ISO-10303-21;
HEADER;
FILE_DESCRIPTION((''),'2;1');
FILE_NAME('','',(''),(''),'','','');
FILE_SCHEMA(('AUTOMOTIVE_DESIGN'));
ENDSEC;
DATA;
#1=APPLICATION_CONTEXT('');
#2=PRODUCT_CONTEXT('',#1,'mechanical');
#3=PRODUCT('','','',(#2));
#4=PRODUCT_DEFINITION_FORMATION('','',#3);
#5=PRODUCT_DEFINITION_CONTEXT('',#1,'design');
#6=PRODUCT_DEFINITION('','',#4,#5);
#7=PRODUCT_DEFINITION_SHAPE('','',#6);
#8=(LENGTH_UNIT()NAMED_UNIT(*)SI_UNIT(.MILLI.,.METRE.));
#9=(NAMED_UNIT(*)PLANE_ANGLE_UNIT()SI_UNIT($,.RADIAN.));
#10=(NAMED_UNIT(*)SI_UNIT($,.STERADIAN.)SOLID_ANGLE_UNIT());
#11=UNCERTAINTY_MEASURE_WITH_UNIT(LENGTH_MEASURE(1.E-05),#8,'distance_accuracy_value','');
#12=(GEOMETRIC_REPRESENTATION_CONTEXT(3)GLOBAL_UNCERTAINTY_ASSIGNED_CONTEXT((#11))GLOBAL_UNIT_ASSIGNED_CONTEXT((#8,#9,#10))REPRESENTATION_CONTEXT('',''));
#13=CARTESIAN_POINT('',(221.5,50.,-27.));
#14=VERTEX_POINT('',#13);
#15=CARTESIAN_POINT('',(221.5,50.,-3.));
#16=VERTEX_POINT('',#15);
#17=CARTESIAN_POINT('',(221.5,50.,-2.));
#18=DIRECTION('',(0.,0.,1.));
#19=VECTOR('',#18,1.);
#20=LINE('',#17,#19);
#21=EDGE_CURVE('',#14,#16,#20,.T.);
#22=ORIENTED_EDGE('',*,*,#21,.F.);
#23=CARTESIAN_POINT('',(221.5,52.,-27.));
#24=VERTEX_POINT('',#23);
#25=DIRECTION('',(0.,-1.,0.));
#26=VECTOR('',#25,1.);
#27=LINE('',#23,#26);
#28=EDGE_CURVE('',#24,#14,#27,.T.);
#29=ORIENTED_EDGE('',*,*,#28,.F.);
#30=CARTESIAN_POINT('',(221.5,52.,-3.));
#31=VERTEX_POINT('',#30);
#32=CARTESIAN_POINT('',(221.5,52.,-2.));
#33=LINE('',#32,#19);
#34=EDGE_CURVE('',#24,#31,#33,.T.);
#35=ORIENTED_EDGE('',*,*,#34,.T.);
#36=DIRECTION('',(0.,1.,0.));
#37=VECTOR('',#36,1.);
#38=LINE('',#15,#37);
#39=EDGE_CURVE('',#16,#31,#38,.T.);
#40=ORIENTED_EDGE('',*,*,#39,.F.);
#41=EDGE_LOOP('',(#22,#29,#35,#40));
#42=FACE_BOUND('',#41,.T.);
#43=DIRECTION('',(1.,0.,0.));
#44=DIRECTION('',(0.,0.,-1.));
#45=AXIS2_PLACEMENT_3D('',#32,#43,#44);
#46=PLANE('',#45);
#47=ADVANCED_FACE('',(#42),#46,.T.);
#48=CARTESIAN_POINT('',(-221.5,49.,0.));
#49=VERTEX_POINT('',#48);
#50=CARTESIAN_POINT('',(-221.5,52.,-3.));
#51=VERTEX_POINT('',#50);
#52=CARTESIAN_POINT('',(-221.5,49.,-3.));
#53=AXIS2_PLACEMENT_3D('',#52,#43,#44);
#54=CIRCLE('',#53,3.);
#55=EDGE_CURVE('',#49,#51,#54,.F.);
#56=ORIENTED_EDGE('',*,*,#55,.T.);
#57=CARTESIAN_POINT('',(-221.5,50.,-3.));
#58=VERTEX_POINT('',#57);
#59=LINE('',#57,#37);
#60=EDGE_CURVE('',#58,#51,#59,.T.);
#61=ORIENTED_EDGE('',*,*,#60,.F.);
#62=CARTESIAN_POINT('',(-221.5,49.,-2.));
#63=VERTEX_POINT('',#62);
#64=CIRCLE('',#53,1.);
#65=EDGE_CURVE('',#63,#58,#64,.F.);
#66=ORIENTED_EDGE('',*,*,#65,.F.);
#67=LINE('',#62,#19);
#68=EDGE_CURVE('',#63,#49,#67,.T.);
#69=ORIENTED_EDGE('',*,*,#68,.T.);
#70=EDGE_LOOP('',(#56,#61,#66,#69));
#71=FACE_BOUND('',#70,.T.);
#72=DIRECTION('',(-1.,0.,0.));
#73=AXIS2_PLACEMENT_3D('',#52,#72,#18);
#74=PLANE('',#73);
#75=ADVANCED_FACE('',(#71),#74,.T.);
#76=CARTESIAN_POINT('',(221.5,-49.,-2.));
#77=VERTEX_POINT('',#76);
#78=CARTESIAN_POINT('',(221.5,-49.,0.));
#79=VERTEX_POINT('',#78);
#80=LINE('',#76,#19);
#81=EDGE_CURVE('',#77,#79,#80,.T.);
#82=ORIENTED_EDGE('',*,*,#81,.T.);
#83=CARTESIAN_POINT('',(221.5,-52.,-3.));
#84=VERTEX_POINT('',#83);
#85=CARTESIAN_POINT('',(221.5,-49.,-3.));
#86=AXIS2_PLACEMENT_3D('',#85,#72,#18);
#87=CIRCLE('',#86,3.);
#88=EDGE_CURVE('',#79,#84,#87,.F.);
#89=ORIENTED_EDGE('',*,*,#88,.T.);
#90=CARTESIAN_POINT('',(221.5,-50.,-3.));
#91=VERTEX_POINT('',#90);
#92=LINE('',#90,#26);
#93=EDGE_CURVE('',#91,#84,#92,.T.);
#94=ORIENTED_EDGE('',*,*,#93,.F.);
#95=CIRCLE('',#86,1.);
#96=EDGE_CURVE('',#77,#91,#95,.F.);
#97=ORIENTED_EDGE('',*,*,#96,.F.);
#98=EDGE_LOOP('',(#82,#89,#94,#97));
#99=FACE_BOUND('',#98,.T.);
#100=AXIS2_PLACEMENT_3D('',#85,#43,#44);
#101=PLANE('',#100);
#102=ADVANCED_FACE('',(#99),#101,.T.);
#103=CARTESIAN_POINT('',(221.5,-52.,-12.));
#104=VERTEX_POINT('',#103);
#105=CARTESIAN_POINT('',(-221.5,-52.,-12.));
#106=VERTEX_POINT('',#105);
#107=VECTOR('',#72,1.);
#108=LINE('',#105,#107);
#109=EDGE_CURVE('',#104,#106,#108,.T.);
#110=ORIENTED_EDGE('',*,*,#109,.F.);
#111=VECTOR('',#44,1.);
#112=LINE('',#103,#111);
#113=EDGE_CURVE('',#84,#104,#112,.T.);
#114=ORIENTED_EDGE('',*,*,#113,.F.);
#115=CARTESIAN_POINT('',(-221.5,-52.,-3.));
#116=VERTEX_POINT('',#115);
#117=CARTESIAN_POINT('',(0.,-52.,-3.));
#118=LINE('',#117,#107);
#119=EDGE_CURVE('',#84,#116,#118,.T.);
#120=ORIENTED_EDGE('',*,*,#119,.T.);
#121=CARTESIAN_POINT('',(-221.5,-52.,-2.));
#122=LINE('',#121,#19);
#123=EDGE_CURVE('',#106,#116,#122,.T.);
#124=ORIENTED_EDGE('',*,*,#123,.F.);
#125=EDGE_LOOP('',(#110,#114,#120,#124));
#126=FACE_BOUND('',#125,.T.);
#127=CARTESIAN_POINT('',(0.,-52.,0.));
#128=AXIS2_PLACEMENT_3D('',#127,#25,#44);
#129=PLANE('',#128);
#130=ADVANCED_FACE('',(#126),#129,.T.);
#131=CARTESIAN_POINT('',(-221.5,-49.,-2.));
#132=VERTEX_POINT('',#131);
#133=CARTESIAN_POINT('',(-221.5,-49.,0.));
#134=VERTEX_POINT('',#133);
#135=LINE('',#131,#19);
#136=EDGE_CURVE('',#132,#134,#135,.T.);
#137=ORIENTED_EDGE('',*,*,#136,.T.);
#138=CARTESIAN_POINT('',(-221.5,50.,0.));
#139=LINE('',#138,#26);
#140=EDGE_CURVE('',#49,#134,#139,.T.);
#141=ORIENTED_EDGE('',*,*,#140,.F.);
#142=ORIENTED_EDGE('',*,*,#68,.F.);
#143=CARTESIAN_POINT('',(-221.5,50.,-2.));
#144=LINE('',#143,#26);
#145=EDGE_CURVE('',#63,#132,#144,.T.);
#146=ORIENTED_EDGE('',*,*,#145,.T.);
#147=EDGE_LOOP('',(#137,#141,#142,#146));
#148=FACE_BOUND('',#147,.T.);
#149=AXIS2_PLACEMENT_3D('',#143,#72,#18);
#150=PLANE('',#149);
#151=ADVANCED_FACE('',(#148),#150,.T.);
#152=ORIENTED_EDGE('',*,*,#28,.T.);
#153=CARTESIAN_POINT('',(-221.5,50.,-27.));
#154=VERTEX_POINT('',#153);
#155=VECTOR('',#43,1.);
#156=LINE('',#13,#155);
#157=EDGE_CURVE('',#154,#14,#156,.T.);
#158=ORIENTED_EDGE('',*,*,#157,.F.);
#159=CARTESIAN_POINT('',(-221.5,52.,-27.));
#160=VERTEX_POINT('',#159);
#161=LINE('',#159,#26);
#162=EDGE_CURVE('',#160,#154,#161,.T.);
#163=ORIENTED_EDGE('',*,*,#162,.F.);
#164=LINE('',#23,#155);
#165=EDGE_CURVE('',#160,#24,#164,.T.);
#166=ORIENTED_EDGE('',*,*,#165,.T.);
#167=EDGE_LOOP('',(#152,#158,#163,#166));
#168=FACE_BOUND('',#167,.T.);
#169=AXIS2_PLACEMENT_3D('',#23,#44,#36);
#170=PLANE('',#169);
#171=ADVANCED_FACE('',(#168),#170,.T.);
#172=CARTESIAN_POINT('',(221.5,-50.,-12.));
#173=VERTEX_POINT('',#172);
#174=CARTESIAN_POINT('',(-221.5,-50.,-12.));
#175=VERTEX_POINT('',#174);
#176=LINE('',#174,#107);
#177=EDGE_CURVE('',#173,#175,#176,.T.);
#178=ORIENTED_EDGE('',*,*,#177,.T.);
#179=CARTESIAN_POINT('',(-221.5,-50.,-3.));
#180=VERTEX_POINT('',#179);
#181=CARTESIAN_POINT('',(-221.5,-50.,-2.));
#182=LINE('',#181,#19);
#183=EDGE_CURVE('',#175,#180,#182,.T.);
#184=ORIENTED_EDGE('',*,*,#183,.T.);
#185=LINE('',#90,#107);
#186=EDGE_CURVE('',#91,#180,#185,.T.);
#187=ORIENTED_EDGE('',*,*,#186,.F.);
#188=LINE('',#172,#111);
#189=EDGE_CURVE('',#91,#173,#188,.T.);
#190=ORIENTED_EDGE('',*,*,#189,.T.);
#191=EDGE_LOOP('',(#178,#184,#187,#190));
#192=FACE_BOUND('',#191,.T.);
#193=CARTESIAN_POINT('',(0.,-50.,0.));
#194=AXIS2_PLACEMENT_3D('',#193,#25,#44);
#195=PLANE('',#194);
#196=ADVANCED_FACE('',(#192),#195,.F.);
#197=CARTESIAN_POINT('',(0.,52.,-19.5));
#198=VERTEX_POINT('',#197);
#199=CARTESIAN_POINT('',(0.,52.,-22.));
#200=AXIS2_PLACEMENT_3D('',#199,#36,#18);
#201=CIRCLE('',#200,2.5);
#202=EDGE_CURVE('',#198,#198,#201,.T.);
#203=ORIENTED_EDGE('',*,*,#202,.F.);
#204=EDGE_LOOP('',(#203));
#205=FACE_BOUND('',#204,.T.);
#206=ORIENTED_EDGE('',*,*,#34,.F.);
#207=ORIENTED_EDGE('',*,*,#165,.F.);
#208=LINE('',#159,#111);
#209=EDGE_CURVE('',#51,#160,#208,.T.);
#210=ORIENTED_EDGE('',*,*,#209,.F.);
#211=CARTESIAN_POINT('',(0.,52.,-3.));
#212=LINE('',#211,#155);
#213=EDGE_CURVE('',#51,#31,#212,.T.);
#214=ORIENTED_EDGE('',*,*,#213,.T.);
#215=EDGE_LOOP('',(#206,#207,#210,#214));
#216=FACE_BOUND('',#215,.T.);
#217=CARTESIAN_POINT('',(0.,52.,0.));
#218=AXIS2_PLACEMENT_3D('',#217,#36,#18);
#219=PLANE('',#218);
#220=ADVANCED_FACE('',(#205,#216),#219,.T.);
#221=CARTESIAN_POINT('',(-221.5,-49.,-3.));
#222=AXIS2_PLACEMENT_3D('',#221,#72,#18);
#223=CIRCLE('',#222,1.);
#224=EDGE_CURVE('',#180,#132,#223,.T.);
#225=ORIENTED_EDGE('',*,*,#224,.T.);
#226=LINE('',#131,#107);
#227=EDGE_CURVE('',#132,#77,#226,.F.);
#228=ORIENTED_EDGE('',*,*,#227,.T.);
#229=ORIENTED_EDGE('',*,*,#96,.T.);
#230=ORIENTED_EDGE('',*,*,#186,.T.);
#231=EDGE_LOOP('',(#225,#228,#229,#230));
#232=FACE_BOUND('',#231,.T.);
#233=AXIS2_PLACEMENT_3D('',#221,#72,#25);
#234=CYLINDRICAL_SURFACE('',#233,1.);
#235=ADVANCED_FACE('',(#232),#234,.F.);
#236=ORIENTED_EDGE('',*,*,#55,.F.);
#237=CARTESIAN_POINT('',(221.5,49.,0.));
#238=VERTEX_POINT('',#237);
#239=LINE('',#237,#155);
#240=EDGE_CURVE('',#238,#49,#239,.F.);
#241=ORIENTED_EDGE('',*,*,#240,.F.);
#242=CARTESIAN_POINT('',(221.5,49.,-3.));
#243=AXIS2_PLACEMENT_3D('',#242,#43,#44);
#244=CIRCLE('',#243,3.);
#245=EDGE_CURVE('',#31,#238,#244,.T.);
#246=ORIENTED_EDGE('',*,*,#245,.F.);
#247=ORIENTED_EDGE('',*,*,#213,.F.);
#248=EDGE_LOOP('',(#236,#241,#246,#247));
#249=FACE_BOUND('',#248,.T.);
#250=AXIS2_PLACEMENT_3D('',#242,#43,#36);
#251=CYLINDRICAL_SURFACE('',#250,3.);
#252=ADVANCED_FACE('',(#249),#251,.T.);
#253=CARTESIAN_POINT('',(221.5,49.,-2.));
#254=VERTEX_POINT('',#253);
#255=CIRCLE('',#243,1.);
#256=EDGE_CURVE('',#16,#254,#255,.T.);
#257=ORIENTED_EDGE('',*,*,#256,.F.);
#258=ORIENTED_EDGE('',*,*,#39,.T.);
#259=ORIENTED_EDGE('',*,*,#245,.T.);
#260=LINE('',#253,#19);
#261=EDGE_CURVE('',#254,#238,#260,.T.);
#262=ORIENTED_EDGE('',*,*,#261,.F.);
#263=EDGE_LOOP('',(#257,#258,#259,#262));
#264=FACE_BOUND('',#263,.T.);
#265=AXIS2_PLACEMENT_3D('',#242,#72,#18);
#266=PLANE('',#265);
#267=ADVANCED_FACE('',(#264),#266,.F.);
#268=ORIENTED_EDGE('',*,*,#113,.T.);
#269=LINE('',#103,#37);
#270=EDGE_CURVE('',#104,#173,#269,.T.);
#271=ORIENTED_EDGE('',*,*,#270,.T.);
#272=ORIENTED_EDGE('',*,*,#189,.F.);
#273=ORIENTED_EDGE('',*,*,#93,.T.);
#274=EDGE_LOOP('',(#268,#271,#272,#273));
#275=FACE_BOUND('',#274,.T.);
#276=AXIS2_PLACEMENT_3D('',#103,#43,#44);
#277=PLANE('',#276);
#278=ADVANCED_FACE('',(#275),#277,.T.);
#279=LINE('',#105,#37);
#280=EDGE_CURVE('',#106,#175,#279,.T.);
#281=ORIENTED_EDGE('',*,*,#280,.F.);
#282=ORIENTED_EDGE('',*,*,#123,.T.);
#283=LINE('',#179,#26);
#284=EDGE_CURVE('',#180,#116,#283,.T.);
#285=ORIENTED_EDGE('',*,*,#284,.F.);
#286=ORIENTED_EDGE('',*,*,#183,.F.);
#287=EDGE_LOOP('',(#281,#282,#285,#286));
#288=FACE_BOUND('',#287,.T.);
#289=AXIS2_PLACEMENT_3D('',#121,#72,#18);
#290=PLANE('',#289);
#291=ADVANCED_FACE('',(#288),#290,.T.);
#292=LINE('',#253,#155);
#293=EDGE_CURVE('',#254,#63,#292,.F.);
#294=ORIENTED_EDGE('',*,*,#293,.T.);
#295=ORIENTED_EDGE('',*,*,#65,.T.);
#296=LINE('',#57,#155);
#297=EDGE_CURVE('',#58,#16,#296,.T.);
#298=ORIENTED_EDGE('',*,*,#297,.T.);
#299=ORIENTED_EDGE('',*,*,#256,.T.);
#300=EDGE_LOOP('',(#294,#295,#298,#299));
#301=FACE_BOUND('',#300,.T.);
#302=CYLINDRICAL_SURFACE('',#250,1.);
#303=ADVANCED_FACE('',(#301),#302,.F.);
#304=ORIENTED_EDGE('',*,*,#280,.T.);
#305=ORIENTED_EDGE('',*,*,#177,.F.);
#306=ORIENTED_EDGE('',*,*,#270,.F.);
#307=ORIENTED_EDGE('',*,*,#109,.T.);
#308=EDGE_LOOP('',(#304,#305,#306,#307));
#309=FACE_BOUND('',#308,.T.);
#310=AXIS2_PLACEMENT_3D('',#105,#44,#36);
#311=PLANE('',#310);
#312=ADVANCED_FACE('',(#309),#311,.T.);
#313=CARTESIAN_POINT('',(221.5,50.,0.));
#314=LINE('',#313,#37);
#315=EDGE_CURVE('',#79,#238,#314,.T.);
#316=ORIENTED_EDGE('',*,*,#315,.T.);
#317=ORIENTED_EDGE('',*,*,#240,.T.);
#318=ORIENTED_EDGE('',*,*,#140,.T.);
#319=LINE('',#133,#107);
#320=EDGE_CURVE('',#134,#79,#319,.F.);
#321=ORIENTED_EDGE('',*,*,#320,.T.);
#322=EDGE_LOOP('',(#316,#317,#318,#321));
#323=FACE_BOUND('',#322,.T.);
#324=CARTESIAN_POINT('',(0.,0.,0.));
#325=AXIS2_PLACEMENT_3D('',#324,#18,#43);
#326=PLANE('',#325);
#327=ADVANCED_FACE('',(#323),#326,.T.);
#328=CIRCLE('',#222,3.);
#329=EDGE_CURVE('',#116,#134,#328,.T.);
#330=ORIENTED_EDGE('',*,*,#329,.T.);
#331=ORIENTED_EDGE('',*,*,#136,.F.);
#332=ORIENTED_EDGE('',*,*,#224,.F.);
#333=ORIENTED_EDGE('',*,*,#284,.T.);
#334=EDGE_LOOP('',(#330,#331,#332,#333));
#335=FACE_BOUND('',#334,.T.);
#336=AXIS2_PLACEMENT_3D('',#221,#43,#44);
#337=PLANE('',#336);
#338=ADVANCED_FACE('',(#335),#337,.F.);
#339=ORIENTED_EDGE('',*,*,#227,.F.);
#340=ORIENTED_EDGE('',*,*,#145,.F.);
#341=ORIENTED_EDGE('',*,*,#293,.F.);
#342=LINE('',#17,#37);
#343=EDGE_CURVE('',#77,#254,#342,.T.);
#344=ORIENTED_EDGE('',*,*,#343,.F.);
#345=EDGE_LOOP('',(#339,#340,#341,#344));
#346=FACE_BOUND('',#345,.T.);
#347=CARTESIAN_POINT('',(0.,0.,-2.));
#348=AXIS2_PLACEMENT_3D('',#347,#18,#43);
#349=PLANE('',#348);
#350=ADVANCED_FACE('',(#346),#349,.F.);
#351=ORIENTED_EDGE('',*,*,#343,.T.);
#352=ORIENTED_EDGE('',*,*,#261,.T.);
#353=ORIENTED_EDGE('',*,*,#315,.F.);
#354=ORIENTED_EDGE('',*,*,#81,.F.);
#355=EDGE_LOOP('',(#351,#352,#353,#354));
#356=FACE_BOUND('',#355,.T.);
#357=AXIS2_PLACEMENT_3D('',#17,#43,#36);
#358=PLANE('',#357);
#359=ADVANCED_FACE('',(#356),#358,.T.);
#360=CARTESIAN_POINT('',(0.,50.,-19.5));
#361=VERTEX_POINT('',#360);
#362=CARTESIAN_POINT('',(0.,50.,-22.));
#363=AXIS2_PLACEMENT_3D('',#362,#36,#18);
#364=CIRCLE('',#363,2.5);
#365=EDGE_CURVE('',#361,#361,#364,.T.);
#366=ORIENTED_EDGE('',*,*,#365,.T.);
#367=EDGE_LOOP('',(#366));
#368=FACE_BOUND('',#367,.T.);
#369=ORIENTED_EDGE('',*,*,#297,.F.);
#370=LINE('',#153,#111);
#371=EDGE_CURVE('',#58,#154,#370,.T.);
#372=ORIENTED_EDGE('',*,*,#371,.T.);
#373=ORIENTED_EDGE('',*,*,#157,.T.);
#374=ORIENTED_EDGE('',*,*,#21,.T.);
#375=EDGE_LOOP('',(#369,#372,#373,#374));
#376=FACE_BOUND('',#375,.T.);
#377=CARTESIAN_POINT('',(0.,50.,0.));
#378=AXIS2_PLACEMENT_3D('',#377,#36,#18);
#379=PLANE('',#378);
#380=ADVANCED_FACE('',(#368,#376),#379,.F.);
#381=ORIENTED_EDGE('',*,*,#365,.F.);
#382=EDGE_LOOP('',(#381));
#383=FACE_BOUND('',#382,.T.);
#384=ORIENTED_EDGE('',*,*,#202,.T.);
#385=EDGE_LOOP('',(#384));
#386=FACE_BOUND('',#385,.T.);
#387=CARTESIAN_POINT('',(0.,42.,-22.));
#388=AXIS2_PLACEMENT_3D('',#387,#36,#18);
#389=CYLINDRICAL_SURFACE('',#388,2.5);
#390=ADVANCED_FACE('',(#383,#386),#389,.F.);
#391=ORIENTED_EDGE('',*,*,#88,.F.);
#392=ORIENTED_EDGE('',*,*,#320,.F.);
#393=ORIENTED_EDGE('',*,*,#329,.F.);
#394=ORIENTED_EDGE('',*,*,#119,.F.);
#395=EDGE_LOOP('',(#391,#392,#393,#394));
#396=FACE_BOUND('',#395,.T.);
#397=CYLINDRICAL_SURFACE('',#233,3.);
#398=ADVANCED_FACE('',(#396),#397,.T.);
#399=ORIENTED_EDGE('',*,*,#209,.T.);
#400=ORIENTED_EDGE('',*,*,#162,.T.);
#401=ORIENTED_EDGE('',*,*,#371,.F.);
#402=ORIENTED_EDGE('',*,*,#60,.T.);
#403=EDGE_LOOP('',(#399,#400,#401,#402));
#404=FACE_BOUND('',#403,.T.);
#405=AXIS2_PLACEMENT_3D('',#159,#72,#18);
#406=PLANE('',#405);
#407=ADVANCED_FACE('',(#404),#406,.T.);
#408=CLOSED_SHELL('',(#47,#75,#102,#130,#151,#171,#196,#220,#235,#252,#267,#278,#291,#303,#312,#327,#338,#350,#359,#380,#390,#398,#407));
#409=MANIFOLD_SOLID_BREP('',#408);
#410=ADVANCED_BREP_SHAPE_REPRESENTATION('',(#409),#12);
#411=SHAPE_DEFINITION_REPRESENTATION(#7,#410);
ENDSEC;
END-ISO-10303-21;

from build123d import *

# Parameters (mm, degrees)
SKETCH1_W                    = 443
SKETCH1_H                    = 100
BASE_FLANGE1_DEPTH           = 2
EDGE_FLANGE1_STRIP_W         = 10
EDGE_FLANGE1_STRIP_H         = 2
EDGE_FLANGE1_STRIP_CUT_DEPTH = 443
EDGE_FLANGE1_DEPTH           = 443
EDGE_FLANGE2_STRIP_W         = 10
EDGE_FLANGE2_STRIP_H         = 2
EDGE_FLANGE2_STRIP_CUT_DEPTH = 443
EDGE_FLANGE2_DEPTH           = 443
CUT_EXTRUDE2_DEPTH           = 10


# Sheet-metal steps are written as plain solids
with BuildPart() as part:
    # Sketch1 → Base-Flange1 (new body)
    with BuildSketch(Plane.XY):
        Rectangle(SKETCH1_W, SKETCH1_H)
    extrude(amount=-BASE_FLANGE1_DEPTH)

    # Edge-Flange1 strip (across the edge) → Edge-Flange1 strip cut (cut)
    with BuildSketch(Plane(origin=(-221.5, 50, -2), x_dir=(0, -1, 0), z_dir=(1, 0, 0))):
        with Locations((-4, -1)):
            Rectangle(EDGE_FLANGE1_STRIP_W, EDGE_FLANGE1_STRIP_H)
    extrude(amount=EDGE_FLANGE1_STRIP_CUT_DEPTH, mode=Mode.SUBTRACT)

    # Edge-Flange1 section (across the edge) → Edge-Flange1 (add)
    with BuildSketch(Plane(origin=(-221.5, 50, -2), x_dir=(0, -1, 0), z_dir=(1, 0, 0))):
        with BuildLine():
            Line((-2, 1), (-2, 25))
            Line((-2, 25), (0, 25))
            Line((0, 25), (0, 1))
            ThreePointArc((0, 1), (0.292893219, 0.292893219), (1, 0))
            Line((1, 0), (1, -2))
            ThreePointArc((1, -2), (-1.121320344, -1.121320344), (-2, 1))
        make_face()
    extrude(amount=EDGE_FLANGE1_DEPTH)

    # Edge-Flange2 strip (across the edge) → Edge-Flange2 strip cut (cut)
    with BuildSketch(Plane(origin=(221.5, -50, -2), x_dir=(0, 1, 0), z_dir=(-1, 0, 0))):
        with Locations((-4, -1)):
            Rectangle(EDGE_FLANGE2_STRIP_W, EDGE_FLANGE2_STRIP_H)
    extrude(amount=EDGE_FLANGE2_STRIP_CUT_DEPTH, mode=Mode.SUBTRACT)

    # Edge-Flange2 section (across the edge) → Edge-Flange2 (add)
    with BuildSketch(Plane(origin=(221.5, -50, -2), x_dir=(0, 1, 0), z_dir=(-1, 0, 0))):
        with BuildLine():
            Line((-2, 1), (-2, 10))
            Line((-2, 10), (0, 10))
            Line((0, 10), (0, 1))
            ThreePointArc((0, 1), (0.292893219, 0.292893219), (1, 0))
            Line((1, 0), (1, -2))
            ThreePointArc((1, -2), (-1.121320344, -1.121320344), (-2, 1))
        make_face()
    extrude(amount=EDGE_FLANGE2_DEPTH)

    # Sketch13 → Cut-Extrude2 (cut)
    with BuildSketch(Plane(origin=(0, 52, 0), x_dir=(1, 0, 0), z_dir=(0, 1, 0))):
        with BuildLine():
            ThreePointArc((0, 24.5), (-2.5, 22), (0, 19.5))
            Line((0, 19.5), (0, 24.5))
        make_face()
        with BuildLine():
            Line((0, 24.5), (0, 19.5))
            ThreePointArc((0, 19.5), (1.767766953, 20.232233047), (2.5, 22))
            ThreePointArc((2.5, 22), (1.767766953, 23.767766953), (0, 24.5))
        make_face()
    extrude(amount=-CUT_EXTRUDE2_DEPTH, mode=Mode.SUBTRACT)


solid = part.part
